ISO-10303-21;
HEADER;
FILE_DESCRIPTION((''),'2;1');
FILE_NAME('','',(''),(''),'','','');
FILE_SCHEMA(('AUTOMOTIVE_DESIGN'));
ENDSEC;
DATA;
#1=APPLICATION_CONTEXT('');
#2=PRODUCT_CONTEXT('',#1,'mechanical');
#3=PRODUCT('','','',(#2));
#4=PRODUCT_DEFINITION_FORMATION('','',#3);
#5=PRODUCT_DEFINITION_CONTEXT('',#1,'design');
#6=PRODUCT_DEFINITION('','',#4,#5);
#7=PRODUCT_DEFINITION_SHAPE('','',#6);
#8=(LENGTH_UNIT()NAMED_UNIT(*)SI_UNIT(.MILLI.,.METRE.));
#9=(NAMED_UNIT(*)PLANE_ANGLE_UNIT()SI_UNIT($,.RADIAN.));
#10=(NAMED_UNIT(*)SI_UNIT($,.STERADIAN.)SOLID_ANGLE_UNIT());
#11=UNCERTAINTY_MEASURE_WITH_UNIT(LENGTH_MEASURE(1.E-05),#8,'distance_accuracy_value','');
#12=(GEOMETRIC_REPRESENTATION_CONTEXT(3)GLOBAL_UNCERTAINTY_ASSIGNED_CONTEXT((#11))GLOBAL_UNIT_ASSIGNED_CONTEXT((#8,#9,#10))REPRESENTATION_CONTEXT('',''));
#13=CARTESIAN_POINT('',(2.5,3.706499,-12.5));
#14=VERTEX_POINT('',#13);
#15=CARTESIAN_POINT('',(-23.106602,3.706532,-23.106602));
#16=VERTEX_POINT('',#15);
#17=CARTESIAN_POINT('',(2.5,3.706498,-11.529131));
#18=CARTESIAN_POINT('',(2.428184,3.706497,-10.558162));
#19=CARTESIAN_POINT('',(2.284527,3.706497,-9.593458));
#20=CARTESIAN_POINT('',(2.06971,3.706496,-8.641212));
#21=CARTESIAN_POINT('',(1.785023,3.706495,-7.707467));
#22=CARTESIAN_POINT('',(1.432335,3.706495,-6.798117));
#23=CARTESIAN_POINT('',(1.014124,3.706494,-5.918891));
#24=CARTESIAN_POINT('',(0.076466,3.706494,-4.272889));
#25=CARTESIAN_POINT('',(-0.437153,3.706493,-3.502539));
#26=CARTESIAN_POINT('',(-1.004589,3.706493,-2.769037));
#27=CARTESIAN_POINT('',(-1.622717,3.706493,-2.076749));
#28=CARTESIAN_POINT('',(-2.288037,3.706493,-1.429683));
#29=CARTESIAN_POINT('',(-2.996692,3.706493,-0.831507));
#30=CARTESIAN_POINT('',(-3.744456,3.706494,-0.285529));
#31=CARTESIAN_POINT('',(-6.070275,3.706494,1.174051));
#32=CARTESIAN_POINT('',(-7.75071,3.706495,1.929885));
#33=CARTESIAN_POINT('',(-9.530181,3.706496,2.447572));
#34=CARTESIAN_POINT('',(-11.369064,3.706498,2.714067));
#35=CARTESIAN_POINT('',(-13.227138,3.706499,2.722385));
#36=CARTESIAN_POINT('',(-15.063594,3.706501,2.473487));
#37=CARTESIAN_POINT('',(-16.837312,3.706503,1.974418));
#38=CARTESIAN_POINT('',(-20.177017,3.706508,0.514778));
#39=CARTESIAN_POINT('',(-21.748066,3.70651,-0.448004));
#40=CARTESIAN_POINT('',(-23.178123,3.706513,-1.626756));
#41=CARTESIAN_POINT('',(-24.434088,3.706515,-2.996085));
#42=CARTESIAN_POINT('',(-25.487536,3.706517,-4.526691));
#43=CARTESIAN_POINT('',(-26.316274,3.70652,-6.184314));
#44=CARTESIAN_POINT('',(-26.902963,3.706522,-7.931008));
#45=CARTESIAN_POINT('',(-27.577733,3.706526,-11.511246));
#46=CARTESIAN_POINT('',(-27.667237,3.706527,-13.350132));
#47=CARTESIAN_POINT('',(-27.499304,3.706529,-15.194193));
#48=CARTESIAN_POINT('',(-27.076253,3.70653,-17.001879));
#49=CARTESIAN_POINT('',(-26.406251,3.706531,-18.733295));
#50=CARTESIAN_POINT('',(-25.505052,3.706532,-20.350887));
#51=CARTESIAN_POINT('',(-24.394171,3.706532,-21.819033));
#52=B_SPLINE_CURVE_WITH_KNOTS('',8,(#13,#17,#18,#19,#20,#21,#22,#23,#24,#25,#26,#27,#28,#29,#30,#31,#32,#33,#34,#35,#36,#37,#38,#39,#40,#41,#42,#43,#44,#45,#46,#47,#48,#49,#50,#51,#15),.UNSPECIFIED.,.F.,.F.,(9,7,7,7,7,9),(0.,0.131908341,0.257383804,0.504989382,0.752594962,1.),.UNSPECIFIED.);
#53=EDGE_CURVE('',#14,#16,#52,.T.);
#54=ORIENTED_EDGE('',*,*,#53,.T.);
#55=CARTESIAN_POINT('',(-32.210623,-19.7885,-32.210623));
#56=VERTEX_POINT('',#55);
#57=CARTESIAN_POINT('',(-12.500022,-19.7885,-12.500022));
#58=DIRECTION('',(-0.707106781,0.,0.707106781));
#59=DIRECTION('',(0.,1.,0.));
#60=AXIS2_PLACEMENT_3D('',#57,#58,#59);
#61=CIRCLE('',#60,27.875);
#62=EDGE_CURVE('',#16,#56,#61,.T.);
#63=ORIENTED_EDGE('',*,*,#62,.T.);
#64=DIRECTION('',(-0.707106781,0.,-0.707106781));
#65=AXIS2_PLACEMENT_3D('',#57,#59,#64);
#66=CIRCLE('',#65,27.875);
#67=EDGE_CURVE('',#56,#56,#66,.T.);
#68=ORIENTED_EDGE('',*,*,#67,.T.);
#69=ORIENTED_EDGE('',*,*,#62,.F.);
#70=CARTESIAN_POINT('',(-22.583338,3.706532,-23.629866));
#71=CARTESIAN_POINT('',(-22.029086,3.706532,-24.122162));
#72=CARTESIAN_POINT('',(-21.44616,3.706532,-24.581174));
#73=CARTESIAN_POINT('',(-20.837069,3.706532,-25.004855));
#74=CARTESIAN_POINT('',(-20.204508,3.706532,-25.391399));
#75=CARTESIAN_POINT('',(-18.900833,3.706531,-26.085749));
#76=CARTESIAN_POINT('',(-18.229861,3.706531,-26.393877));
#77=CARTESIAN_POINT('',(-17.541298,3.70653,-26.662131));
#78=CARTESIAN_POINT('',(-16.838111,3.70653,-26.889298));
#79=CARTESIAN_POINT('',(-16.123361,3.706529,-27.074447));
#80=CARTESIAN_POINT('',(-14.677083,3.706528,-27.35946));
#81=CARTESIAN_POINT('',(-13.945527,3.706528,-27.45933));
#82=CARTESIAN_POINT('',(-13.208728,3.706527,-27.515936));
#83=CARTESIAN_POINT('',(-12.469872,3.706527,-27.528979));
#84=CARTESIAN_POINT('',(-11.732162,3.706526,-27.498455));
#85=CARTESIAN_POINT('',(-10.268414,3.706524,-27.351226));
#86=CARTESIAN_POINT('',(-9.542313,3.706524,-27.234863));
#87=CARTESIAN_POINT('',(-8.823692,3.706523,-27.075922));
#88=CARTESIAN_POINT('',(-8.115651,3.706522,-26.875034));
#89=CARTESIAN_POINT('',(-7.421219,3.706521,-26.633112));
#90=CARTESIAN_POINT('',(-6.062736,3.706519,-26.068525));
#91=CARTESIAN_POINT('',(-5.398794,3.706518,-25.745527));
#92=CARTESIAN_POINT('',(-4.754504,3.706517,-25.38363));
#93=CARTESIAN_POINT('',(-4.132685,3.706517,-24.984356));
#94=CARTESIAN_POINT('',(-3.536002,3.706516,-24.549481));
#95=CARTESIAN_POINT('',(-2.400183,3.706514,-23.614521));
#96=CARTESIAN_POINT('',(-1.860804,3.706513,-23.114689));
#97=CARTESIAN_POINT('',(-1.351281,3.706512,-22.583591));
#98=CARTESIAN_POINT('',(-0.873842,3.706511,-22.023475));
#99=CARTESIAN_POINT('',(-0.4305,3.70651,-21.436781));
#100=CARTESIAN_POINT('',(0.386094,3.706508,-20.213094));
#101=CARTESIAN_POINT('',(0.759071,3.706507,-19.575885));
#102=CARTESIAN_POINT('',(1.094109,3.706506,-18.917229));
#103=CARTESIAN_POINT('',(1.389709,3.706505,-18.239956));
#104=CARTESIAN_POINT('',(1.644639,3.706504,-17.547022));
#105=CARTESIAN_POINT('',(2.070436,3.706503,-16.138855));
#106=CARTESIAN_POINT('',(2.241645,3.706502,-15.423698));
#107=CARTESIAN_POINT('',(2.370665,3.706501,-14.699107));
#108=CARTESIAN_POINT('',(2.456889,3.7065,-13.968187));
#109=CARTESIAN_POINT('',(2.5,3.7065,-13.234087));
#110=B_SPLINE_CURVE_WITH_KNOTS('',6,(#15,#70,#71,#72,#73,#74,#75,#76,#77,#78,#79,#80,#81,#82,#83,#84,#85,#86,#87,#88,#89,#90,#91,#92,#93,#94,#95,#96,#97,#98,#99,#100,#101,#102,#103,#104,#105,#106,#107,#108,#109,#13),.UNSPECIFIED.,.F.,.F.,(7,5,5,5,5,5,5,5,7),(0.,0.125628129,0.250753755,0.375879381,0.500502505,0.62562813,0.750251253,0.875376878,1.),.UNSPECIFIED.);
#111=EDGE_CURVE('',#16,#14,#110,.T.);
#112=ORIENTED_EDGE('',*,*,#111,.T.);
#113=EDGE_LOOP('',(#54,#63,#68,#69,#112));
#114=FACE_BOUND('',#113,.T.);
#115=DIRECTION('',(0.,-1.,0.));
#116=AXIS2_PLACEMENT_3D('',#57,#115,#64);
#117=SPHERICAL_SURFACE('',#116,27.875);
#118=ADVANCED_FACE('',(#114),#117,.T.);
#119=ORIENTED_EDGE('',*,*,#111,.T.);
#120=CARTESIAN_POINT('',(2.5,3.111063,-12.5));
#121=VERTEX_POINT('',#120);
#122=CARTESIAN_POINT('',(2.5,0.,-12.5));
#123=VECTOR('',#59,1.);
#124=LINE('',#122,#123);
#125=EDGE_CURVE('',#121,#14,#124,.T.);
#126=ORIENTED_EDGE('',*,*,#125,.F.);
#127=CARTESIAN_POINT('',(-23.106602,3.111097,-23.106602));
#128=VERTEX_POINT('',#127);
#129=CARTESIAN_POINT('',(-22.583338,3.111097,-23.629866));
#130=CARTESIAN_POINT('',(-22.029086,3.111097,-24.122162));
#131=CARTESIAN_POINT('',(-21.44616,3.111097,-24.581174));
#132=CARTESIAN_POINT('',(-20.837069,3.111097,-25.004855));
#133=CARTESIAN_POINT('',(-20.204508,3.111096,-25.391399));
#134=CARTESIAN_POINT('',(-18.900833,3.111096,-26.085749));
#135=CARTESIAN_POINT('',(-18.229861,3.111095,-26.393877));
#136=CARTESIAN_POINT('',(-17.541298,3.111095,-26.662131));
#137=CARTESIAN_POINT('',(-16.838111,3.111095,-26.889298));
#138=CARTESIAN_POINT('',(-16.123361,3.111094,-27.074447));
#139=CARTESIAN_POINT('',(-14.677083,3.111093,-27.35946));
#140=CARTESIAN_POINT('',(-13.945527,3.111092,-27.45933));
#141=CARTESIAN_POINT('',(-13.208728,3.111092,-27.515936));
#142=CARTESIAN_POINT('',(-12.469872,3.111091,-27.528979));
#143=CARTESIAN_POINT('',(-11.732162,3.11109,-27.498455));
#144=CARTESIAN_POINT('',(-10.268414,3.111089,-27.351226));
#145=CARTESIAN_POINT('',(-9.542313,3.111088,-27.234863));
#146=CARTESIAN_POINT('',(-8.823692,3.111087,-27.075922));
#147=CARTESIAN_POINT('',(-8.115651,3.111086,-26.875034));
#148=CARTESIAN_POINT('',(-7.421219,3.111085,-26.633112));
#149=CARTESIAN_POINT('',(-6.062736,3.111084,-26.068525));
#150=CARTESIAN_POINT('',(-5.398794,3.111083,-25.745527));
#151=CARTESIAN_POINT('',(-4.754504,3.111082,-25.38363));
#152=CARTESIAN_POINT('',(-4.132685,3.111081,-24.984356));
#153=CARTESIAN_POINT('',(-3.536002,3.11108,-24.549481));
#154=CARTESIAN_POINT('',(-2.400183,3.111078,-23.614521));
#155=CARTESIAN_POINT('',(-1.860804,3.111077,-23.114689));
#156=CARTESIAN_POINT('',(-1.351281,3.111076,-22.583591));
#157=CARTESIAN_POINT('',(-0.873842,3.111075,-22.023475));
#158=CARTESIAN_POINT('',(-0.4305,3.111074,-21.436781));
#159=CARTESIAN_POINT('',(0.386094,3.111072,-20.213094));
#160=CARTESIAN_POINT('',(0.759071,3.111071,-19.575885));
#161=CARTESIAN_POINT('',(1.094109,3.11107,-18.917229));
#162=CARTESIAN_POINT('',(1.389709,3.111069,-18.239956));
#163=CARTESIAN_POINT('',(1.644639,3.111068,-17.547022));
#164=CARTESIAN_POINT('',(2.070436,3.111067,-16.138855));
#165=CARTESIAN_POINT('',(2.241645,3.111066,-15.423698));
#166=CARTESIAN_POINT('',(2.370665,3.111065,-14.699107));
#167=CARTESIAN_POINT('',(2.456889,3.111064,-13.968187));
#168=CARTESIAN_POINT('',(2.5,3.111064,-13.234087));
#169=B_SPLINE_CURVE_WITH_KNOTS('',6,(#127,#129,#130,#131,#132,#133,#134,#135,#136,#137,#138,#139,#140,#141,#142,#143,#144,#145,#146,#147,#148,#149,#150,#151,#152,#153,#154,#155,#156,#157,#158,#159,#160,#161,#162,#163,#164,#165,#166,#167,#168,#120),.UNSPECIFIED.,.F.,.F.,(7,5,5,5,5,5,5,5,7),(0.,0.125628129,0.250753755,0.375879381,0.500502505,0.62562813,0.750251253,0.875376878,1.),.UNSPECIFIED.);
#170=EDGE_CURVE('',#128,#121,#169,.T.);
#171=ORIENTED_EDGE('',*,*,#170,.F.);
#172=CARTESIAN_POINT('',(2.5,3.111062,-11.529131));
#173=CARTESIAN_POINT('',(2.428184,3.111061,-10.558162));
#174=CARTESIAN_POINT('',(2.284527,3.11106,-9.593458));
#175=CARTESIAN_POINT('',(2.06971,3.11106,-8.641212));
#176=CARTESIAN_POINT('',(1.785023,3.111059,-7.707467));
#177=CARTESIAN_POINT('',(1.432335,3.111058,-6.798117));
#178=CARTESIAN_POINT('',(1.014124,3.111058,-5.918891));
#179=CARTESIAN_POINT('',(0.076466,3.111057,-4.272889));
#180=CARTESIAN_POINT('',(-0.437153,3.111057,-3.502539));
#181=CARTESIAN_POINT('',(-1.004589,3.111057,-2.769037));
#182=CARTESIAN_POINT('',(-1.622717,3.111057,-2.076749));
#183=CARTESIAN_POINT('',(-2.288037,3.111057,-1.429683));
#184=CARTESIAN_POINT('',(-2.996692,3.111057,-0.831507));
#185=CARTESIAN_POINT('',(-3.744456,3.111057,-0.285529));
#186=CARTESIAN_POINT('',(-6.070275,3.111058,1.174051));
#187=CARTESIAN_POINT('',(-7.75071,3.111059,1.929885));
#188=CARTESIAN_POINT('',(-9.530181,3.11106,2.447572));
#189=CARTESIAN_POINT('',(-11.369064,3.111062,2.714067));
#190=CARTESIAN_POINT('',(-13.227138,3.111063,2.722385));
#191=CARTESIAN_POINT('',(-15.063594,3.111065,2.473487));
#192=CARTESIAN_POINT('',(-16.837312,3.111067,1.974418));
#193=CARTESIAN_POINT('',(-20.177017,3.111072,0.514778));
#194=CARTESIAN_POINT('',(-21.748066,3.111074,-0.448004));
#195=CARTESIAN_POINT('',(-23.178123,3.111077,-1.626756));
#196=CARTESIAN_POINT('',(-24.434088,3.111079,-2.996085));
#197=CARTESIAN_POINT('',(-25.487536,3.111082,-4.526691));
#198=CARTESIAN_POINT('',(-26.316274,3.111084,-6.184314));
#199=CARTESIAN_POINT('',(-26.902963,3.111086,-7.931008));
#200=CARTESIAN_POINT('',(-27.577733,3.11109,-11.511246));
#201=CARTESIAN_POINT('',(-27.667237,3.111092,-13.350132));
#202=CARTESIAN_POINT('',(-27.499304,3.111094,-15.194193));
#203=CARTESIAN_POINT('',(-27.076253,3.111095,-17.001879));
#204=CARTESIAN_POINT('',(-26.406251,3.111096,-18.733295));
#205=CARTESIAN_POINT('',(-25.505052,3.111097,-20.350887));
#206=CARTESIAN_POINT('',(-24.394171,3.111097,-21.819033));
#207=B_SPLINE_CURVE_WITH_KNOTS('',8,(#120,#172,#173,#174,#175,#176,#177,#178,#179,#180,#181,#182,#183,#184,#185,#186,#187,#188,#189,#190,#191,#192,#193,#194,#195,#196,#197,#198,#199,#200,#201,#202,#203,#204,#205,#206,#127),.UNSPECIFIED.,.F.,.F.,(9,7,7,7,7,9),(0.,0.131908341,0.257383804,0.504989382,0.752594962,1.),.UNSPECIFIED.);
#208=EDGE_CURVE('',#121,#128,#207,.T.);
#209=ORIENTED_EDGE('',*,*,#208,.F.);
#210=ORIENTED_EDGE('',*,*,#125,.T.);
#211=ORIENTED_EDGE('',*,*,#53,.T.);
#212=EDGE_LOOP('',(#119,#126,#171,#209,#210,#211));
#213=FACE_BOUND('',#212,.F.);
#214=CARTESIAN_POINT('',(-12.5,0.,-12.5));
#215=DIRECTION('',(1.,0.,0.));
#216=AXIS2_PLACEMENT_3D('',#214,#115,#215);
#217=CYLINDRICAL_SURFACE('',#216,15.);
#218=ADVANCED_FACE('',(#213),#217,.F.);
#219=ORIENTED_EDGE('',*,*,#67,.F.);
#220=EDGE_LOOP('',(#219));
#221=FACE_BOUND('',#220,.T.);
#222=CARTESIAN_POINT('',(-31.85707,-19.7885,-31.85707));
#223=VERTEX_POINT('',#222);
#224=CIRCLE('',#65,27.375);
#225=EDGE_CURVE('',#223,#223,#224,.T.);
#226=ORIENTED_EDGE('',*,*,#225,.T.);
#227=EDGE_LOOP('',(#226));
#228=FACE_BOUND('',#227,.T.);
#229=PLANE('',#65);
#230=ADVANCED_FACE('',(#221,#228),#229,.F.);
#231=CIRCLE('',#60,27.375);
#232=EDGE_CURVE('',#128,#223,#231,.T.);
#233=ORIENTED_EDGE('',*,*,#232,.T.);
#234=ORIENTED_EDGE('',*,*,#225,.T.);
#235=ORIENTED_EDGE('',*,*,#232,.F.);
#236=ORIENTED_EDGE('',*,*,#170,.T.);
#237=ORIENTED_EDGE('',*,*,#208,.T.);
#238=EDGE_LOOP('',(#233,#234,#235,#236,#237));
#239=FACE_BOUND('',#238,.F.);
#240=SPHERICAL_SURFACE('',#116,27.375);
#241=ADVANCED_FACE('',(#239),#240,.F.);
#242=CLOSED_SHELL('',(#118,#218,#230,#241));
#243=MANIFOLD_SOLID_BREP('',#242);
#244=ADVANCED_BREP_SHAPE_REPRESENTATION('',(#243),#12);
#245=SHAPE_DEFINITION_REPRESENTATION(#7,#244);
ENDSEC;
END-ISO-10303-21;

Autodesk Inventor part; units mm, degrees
ref_plane "YZ Plane" through (0, 0, 0) normal (1, 0, 0) x (0, 1, 0)
sketch "Sketch1" plane through (0, 0, 0) normal (0, 1, 0) x (-1, 0, 0)
  line L0 (0, 0) -> (25, 0)
  line L1 (25, 0) -> (25, -25)
  line L2 (25, -25) -> (0, -25)
  line L3 (0, -25) -> (0, 0)
  circle A0 centre (12.5, -12.5) radius 17.6777
  circle A1 centre (12.5, -12.5) radius 21.86
  dimension "d0" = 25
  dimension "d1" = 25
  dimension "d2" = 43.72
extrude "Extrusion1" add sketch "Sketch1" along normal blind 1 contours L0 L1 L2 L3
ref_plane "Work Plane2" through (0, 0, 0) normal (-0.7071068, 0, 0.7071068) x (0, 1, 0)
sketch "Sketch3" plane through (0, 0, 0) normal (-0.7071068, 0, 0.7071068) x (0, 1, 0)
  line L0 (1, 0) -> (1, 17.6777) projected
  line L1 (1, 17.6777) -> (1, 35.3553) projected
  line L2 (1, 17.6777) -> (7.5, 17.6777) construction
  arc A0 (1, 0) -> (1, 35.3553) centre (-19.7885, 17.6777) ccw construction
  circle A1 centre (-19.7885, 17.6777) radius 27.375 construction
  circle A2 centre (-19.7885, 17.6777) radius 27.375
  circle A3 centre (-19.7885, 17.6777) radius 27.875
  line L3 (7.5, 17.6777) -> (8.0865, 17.6777)
  line L4 (-19.7885, 45.0527) -> (-19.7885, 45.5527)
  line L5 (-19.7885, 17.6777) -> (-5.3263, 17.6777)
  line L6 (-19.7885, 17.6777) -> (-19.7885, 45.0527)
  point P0 (0, 0)
  point P1 (7.5865, 17.6777)
  dimension "d10" = 6.5
  dimension "d11" = 54.75
  dimension "d12" = 55.75
revolve "Revolution1" add sketch "Sketch3" angle 360 about axis through (-12.5, -19.7885, -12.5) along (0, 1, 0) picked at (-9.7302, 43.3292) contours A2 L4 A3 L3
ref_plane "Work Plane3" through (0, 1, 0) normal (0, -1, 0) x (1, 0, 0)
sketch "Sketch5" plane through (0, 0, 0) normal (0, -1, 0) x (1, 0, 0)
  line L0 (0, -25) -> (-25, -25) construction
  line L1 (0, 0) -> (0, -25) construction
  line L2 (-25, 0) -> (0, 0) construction
  line L3 (-25, -25) -> (-25, 0) construction
  line L4 (-12.5, 0) -> (-12.5, -12.5) construction
  circle A0 centre (-12.5, -12.5) radius 15
  dimension "d33" = 12.5
  dimension "d34" = 30
extrude "Extrusion3" cut sketch "Sketch5" against normal blind 10
sketch "Sketch6" plane through (0, 0, 0) normal (0, -1, 0) x (1, 0, 0)
  arc A0 (-25, -20.7916) -> (-20.7916, -25) centre (-12.5, -12.5) ccw projected
  line L0 (0, -25) -> (-4.2084, -25) projected
  line L1 (0, 0) -> (0, -4.2084) projected
  line L2 (-25, 0) -> (-20.7916, 0) projected
  line L3 (-25, -25) -> (-25, -20.7916) projected
  line L4 (-20.7916, -25) -> (-25, -25) projected
  arc A1 (-4.2084, -25) -> (0, -20.7916) centre (-12.5, -12.5) ccw projected
  line L5 (0, -20.7916) -> (0, -25) projected
  arc A2 (0, -4.2084) -> (-4.2084, 0) centre (-12.5, -12.5) ccw projected
  line L6 (-4.2084, 0) -> (0, 0) projected
  arc A3 (-20.7916, 0) -> (-25, -4.2084) centre (-12.5, -12.5) ccw projected
  line L7 (-25, -4.2084) -> (-25, 0) projected
extrude "Extrusion4" cut sketch "Sketch6" against normal blind 1
properties part number "Ball"
